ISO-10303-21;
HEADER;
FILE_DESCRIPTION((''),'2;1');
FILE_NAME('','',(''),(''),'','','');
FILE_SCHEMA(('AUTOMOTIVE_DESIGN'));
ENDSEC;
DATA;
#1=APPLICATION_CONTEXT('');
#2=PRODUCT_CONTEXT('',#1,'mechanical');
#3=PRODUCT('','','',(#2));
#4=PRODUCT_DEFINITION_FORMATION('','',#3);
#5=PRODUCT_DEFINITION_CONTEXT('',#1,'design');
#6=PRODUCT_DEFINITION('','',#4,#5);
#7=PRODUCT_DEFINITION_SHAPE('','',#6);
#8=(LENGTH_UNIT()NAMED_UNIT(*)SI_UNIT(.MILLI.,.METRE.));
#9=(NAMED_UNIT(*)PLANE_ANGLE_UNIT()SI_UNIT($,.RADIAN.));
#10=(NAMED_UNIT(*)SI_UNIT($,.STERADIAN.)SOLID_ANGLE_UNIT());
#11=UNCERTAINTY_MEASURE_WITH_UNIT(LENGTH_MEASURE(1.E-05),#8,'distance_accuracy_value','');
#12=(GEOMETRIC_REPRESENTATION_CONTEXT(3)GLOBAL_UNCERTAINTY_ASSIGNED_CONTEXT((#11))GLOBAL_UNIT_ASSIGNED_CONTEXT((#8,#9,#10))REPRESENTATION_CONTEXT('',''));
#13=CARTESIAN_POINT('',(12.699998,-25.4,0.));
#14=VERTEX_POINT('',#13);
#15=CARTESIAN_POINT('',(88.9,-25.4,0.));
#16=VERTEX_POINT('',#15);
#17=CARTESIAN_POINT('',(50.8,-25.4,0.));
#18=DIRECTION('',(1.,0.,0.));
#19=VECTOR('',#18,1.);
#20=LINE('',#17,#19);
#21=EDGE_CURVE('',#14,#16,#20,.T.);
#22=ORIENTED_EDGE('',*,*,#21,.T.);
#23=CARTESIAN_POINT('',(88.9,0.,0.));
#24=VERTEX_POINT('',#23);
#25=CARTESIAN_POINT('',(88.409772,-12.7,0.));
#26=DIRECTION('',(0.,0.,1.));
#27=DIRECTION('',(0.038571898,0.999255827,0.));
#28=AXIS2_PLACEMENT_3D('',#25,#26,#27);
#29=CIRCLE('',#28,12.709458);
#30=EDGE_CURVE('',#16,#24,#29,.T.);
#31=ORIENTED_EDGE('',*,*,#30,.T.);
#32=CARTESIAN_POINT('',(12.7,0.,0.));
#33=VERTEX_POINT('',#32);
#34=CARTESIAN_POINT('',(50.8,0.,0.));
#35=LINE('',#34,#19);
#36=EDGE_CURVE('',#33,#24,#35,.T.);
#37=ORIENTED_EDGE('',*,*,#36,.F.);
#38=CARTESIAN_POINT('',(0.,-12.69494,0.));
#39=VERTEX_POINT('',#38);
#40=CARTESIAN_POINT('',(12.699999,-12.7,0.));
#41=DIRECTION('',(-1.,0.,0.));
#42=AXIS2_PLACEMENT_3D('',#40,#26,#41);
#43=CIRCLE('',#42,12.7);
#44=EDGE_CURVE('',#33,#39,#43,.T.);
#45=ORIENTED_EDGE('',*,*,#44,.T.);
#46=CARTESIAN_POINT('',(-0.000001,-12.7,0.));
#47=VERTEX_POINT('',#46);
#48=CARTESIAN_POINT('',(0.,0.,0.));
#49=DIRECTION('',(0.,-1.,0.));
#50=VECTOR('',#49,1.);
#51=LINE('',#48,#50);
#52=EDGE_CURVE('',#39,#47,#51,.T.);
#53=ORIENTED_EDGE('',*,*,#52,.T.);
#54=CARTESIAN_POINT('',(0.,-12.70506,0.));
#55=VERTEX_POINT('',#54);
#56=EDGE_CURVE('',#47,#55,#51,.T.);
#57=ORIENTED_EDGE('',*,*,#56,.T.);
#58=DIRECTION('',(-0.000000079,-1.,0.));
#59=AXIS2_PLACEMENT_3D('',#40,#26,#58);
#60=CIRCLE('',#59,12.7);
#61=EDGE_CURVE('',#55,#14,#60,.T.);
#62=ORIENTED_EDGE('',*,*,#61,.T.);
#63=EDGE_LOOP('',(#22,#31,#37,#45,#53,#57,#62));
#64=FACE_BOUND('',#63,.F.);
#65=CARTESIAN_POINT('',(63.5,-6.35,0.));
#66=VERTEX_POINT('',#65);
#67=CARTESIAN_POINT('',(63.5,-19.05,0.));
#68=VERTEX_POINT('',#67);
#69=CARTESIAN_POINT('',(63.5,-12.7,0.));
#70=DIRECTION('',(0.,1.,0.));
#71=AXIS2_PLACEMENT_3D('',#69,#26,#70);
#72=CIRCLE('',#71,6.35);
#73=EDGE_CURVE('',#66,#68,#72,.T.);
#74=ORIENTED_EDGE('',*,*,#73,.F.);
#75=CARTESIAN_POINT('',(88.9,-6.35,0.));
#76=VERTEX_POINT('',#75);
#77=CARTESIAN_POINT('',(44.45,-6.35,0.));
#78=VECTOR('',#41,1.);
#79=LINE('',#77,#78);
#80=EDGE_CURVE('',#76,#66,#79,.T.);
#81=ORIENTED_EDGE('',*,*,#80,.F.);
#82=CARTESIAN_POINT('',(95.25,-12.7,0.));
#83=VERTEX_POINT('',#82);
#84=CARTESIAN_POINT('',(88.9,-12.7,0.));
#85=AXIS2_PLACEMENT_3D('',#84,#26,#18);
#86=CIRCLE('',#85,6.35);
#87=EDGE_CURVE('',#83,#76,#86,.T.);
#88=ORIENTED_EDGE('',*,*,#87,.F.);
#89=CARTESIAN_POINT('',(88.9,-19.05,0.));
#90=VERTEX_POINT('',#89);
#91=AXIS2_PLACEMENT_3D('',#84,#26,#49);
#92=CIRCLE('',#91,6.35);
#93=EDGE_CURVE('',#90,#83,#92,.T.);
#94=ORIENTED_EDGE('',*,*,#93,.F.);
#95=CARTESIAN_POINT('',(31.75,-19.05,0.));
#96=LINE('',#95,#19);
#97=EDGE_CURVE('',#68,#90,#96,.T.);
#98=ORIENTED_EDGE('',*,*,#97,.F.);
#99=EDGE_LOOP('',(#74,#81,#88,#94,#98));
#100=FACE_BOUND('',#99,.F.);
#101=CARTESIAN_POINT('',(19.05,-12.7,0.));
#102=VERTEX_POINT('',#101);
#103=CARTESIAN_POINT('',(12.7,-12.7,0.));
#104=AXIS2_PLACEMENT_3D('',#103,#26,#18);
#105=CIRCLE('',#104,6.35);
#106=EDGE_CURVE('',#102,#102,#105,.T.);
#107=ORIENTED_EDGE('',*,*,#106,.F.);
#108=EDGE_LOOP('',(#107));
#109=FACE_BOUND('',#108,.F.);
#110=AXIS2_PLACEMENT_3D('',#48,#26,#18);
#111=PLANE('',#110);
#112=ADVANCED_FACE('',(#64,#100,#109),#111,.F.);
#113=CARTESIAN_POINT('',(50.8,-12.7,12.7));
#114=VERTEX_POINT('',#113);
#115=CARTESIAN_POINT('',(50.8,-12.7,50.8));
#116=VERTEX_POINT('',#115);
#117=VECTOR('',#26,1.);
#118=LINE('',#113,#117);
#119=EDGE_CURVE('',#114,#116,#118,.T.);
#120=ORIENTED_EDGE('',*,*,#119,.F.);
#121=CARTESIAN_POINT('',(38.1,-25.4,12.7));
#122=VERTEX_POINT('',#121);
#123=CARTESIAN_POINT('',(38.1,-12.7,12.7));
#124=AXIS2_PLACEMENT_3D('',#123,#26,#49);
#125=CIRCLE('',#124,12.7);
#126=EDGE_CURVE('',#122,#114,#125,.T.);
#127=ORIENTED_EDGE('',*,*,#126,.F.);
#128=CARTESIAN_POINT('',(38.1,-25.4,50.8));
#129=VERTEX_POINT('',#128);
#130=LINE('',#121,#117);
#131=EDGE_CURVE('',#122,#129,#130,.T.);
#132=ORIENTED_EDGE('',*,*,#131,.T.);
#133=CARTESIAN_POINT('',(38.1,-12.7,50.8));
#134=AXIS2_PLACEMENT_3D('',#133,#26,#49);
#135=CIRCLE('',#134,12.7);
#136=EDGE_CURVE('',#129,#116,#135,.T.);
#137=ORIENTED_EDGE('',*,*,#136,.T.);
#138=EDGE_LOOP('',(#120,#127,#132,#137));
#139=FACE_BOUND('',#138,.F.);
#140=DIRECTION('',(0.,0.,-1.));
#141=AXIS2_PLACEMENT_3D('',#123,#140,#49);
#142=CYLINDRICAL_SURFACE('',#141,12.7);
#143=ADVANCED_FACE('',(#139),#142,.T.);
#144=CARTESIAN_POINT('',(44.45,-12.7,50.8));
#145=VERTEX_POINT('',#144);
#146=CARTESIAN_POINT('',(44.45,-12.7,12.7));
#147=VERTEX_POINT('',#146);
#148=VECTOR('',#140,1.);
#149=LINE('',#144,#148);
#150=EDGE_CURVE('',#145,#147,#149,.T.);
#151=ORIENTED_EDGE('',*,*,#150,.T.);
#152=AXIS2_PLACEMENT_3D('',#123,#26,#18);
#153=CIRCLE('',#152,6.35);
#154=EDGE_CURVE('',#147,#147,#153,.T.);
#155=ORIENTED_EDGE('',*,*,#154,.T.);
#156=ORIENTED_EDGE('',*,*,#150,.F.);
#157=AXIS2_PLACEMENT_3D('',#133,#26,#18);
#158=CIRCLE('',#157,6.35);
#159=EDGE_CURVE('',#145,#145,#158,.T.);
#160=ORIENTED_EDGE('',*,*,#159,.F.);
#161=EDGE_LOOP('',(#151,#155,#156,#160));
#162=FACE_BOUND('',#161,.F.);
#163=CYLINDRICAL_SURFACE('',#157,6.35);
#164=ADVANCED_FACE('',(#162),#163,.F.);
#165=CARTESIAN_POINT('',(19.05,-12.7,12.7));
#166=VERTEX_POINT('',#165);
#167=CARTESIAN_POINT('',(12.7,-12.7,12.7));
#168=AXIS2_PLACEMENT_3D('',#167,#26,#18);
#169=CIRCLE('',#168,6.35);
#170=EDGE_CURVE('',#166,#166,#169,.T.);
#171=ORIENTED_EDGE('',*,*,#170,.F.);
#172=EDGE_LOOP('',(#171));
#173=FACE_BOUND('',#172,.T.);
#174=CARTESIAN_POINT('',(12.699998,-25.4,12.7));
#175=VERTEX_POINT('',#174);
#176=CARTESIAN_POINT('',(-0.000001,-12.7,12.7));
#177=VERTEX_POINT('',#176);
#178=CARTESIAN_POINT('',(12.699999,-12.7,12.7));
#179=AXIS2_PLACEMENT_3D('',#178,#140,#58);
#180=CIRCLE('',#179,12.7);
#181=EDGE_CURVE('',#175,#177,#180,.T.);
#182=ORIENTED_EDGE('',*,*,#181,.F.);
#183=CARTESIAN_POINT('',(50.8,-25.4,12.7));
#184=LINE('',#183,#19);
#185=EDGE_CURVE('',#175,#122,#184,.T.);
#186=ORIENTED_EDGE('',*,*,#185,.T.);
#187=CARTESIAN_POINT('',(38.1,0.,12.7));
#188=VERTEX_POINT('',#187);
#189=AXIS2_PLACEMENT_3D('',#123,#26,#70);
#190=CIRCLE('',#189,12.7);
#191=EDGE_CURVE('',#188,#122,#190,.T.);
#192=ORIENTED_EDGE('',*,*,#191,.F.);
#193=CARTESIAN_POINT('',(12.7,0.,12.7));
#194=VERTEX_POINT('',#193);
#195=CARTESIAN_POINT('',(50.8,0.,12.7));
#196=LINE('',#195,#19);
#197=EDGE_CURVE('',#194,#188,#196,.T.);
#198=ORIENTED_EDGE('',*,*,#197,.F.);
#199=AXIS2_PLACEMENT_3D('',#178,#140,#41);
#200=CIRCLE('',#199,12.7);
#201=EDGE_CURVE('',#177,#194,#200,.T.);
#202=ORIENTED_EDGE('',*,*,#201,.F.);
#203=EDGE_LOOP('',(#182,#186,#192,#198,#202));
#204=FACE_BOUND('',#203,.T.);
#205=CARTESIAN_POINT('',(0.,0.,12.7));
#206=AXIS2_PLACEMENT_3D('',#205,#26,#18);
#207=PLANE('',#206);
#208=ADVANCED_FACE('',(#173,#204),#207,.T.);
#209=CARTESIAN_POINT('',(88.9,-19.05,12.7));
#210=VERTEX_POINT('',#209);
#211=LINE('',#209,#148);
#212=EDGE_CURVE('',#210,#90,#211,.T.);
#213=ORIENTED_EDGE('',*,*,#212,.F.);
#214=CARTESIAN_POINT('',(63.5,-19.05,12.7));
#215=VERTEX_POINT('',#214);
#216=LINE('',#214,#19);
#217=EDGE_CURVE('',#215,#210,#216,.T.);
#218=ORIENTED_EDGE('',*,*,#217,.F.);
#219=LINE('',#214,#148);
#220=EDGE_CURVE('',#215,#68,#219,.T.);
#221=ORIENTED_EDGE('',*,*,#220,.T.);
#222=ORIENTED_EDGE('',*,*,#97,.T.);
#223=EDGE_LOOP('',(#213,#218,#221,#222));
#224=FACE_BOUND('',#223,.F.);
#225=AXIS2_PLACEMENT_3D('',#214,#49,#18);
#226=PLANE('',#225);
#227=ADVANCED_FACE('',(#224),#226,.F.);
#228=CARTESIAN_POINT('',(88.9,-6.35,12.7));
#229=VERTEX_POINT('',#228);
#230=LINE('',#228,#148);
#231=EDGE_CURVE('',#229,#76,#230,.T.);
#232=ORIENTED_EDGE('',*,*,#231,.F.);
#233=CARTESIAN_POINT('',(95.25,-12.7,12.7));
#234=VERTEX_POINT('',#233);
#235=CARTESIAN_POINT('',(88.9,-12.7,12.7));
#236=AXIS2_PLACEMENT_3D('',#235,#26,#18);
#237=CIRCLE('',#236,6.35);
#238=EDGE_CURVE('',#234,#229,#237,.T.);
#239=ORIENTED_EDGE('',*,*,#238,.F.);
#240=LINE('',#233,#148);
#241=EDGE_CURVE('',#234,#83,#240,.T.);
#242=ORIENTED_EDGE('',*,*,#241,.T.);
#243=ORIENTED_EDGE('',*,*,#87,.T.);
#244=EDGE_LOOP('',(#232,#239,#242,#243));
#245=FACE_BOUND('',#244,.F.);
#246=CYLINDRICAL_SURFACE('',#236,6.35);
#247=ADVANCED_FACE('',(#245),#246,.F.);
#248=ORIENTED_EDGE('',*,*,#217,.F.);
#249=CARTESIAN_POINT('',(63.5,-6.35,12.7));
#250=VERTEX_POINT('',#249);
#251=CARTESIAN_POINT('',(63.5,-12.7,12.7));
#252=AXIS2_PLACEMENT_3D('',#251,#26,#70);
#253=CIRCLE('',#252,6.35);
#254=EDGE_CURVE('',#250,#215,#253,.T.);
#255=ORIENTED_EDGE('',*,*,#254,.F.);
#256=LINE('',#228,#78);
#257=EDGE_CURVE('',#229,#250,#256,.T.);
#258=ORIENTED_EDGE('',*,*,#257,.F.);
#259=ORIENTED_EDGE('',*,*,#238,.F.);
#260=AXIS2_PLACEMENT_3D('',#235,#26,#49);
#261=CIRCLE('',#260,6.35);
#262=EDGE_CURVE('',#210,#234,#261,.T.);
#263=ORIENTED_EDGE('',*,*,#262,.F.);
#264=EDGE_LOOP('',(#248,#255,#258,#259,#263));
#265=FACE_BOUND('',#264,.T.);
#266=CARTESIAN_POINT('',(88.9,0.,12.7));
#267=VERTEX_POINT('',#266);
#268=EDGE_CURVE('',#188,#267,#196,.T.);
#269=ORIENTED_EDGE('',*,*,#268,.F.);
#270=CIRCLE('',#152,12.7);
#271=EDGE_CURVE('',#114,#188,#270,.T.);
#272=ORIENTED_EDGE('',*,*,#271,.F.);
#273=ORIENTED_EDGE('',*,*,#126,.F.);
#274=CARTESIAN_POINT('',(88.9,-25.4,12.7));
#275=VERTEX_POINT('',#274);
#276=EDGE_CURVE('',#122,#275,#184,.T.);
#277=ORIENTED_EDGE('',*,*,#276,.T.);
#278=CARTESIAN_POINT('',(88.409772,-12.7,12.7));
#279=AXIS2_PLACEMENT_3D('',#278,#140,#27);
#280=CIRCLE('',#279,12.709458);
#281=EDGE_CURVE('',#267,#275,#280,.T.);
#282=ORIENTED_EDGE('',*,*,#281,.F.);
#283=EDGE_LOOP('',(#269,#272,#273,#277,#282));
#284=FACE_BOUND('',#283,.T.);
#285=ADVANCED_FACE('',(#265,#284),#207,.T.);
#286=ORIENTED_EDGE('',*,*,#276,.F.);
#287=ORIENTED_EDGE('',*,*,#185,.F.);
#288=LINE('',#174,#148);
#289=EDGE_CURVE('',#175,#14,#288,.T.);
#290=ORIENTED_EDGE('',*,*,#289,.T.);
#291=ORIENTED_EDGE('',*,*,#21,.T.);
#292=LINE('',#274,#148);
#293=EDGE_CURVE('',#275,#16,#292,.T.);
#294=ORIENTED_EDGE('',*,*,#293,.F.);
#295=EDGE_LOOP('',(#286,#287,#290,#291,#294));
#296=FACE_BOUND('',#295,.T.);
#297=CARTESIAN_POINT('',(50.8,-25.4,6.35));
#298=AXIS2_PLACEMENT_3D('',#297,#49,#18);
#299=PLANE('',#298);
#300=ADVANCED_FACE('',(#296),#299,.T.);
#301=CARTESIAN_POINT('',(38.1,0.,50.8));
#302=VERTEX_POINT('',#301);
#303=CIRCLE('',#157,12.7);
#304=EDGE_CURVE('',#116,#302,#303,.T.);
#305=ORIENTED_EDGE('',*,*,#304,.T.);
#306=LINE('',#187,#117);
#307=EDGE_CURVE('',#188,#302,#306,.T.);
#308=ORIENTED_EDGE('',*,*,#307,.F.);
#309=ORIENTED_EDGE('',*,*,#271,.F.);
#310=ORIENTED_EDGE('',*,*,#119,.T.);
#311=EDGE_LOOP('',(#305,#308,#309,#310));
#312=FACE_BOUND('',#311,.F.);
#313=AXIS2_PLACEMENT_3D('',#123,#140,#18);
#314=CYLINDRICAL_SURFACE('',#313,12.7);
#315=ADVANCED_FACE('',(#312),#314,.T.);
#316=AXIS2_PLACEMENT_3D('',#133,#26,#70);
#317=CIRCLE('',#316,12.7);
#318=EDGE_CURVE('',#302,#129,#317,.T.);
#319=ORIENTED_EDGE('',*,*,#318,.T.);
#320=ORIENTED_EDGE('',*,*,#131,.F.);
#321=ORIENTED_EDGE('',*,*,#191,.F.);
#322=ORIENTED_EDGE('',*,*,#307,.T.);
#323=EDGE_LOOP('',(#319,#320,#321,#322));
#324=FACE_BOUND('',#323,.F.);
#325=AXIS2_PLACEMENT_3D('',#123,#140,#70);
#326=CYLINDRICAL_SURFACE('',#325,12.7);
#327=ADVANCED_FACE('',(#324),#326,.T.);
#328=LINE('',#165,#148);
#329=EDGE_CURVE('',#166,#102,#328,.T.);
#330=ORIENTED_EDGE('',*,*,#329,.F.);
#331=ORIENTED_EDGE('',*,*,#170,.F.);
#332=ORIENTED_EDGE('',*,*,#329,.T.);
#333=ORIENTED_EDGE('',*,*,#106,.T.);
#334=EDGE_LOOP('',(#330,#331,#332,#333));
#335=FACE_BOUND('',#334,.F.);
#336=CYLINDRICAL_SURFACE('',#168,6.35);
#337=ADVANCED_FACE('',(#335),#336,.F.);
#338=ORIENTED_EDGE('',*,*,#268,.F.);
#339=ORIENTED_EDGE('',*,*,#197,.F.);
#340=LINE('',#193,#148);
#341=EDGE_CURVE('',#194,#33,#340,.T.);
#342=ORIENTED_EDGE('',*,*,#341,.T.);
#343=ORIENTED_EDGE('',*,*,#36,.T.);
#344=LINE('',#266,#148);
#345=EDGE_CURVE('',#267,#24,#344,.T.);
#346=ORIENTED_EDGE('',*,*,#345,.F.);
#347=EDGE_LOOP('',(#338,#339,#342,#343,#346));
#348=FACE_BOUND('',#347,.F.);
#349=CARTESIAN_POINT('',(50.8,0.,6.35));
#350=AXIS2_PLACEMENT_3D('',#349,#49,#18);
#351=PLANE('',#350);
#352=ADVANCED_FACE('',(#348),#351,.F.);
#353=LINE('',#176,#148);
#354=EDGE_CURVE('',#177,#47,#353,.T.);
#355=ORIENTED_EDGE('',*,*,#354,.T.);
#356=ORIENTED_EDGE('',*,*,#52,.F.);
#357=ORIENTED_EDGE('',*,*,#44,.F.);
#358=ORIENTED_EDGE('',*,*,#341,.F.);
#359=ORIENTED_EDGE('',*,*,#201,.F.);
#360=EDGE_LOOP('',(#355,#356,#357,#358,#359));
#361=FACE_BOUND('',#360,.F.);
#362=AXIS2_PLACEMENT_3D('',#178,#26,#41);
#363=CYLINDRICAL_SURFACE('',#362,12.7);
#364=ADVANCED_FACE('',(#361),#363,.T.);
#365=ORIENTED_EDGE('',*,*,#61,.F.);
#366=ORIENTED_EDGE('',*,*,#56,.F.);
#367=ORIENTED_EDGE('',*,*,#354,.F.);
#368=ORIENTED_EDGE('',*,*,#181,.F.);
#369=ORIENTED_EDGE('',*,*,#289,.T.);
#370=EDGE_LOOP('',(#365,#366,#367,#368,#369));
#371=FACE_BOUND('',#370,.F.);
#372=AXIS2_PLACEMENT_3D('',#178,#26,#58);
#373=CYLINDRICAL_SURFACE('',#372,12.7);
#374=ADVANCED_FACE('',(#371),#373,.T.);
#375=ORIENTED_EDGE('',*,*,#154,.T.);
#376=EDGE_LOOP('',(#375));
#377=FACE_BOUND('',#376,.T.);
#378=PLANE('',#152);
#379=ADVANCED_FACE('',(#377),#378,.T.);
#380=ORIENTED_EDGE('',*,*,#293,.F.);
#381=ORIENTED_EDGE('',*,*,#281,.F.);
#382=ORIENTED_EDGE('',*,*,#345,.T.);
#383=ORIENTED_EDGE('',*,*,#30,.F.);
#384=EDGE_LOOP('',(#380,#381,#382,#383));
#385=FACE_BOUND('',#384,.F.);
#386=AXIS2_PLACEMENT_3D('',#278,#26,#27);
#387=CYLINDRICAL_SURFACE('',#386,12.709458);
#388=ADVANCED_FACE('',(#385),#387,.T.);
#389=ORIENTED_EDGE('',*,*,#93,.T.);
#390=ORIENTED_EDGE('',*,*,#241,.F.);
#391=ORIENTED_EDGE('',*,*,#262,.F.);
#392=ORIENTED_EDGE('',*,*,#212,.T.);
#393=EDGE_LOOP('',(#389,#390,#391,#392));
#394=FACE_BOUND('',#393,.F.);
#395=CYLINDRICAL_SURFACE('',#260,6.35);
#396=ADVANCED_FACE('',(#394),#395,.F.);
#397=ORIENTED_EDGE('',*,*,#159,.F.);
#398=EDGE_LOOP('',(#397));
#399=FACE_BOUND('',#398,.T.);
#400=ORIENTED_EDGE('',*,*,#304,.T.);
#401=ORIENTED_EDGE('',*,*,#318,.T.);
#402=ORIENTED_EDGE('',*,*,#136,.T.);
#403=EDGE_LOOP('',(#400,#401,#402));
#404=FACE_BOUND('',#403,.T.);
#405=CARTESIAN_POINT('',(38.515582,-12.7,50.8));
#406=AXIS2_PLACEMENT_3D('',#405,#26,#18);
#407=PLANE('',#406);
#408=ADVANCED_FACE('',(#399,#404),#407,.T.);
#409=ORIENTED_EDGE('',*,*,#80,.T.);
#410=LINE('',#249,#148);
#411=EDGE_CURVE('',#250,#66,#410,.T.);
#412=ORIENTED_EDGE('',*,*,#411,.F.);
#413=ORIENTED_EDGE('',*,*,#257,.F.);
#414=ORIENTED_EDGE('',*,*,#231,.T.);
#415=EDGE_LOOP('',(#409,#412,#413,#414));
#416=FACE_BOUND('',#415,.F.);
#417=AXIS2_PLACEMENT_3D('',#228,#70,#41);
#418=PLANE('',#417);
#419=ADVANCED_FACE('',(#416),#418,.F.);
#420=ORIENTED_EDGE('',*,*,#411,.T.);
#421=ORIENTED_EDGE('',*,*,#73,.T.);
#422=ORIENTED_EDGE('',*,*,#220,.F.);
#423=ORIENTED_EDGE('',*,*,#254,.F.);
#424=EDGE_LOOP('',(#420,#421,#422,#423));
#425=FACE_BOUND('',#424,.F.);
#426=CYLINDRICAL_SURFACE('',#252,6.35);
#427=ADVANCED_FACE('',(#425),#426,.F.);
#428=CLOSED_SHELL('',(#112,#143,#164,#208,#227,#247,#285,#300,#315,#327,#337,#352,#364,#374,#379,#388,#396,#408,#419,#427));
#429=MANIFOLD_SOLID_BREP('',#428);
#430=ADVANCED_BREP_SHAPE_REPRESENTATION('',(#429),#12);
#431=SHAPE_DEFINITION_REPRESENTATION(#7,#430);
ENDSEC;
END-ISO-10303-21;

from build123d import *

# Parameters (mm, degrees)
F0_W      = 101.6
F0_H      = 12.7
F1_DEPTH  = 25.4
F2_R      = 6.35
F3_DEPTH  = 25.4
F5_DEPTH  = 25.4
F7_DEPTH  = 25.4
F9_DEPTH  = 38.1
F10_R     = 6.35
F11_DEPTH = 38.1
F13_DEPTH = 25.4


# Not quite as in the source:
# - ends of sketch curves that miss each other by under 0.0002 mm in the source are joined


with BuildPart() as f1:
    # F0 (on Front) → F1 (new body)
    with BuildSketch(Plane.XZ):
        with Locations((50.8, 6.35)):
            Rectangle(F0_W, F0_H)
    extrude(amount=F1_DEPTH)

    # F2 (on face) → F3 (cut)
    with BuildSketch(Plane.XY.offset(12.7)):
        with Locations((12.7, -12.7)):
            Circle(F2_R)
    extrude(amount=-F3_DEPTH, mode=Mode.SUBTRACT)

    # F4 (on face) → F5 (cut)
    with BuildSketch(Plane.XY.offset(12.7)):
        with BuildLine():
            ThreePointArc((-1.0081e-06, -12.7), (3.7197432273, -3.7197435225), (12.7, 0))
            Line((12.7, 0), (0, 0))
            Line((0, 0), (-1.0081e-06, -12.7))
        make_face()
        with BuildLine():
            ThreePointArc((12.6999979839, -25.4), (3.7197425145, -21.6802557647), (-1.0081e-06, -12.7))
            Line((-1.0081e-06, -12.7), (0, -25.4))
            Line((0, -25.4), (12.6999979839, -25.4))
        make_face()
    extrude(amount=-F5_DEPTH, mode=Mode.SUBTRACT)

    # F6 (on face) → F7 (cut)
    with BuildSketch(Plane.XY.offset(12.7)):
        with BuildLine():
            ThreePointArc((63.5, -6.35), (67.9901280605, -8.2098719395), (69.85, -12.7))
            ThreePointArc((69.85, -12.7), (67.9901280605, -17.1901280605), (63.5, -19.05))
            Line((63.5, -19.05), (88.9, -19.05))
            ThreePointArc((88.9, -19.05), (82.55, -12.7), (88.9, -6.35))
            Line((88.9, -6.35), (63.5, -6.35))
        make_face()
        with BuildLine():
            ThreePointArc((63.5, -19.05), (67.9901280605, -17.1901280605), (69.85, -12.7))
            ThreePointArc((69.85, -12.7), (67.9901280605, -8.2098719395), (63.5, -6.35))
            ThreePointArc((63.5, -6.35), (57.15, -12.7), (63.5, -19.05))
        make_face()
        with BuildLine():
            ThreePointArc((95.25, -12.7), (93.3901280605, -8.2098719395), (88.9, -6.35))
            ThreePointArc((88.9, -6.35), (82.55, -12.7), (88.9, -19.05))
            ThreePointArc((88.9, -19.05), (93.3901280605, -17.1901280605), (95.25, -12.7))
        make_face()
    extrude(amount=-F7_DEPTH, mode=Mode.SUBTRACT)

    # F8 (on face) → F9 (join)
    with BuildSketch(Plane.XY.offset(12.7)):
        with BuildLine():
            ThreePointArc((38.1, -25.4), (47.0802561211, -21.6802561211), (50.8, -12.7))
            ThreePointArc((50.8, -12.7), (47.0802561211, -3.7197438789), (38.1, 0))
            ThreePointArc((38.1, 0), (25.4, -12.7), (38.1, -25.4))
        make_face()
    extrude(amount=F9_DEPTH)

    # F10 (on face) → F11 (cut)
    with BuildSketch(Plane.XY.offset(50.8)):
        with Locations((38.1, -12.7)):
            Circle(F10_R)
    extrude(amount=-F11_DEPTH, mode=Mode.SUBTRACT)

    # F12 (on face) → F13 (cut)
    with BuildSketch(Plane.XY.offset(12.7)):
        with BuildLine():
            ThreePointArc((88.9, 0), (101.1192301161, -12.7), (88.9, -25.4))
            Line((88.9, -25.4), (101.6, -25.4))
            Line((101.6, -25.4), (101.6, 0))
            Line((101.6, 0), (88.9, 0))
        make_face()
    extrude(amount=-F13_DEPTH, mode=Mode.SUBTRACT)


solid = f1.part
